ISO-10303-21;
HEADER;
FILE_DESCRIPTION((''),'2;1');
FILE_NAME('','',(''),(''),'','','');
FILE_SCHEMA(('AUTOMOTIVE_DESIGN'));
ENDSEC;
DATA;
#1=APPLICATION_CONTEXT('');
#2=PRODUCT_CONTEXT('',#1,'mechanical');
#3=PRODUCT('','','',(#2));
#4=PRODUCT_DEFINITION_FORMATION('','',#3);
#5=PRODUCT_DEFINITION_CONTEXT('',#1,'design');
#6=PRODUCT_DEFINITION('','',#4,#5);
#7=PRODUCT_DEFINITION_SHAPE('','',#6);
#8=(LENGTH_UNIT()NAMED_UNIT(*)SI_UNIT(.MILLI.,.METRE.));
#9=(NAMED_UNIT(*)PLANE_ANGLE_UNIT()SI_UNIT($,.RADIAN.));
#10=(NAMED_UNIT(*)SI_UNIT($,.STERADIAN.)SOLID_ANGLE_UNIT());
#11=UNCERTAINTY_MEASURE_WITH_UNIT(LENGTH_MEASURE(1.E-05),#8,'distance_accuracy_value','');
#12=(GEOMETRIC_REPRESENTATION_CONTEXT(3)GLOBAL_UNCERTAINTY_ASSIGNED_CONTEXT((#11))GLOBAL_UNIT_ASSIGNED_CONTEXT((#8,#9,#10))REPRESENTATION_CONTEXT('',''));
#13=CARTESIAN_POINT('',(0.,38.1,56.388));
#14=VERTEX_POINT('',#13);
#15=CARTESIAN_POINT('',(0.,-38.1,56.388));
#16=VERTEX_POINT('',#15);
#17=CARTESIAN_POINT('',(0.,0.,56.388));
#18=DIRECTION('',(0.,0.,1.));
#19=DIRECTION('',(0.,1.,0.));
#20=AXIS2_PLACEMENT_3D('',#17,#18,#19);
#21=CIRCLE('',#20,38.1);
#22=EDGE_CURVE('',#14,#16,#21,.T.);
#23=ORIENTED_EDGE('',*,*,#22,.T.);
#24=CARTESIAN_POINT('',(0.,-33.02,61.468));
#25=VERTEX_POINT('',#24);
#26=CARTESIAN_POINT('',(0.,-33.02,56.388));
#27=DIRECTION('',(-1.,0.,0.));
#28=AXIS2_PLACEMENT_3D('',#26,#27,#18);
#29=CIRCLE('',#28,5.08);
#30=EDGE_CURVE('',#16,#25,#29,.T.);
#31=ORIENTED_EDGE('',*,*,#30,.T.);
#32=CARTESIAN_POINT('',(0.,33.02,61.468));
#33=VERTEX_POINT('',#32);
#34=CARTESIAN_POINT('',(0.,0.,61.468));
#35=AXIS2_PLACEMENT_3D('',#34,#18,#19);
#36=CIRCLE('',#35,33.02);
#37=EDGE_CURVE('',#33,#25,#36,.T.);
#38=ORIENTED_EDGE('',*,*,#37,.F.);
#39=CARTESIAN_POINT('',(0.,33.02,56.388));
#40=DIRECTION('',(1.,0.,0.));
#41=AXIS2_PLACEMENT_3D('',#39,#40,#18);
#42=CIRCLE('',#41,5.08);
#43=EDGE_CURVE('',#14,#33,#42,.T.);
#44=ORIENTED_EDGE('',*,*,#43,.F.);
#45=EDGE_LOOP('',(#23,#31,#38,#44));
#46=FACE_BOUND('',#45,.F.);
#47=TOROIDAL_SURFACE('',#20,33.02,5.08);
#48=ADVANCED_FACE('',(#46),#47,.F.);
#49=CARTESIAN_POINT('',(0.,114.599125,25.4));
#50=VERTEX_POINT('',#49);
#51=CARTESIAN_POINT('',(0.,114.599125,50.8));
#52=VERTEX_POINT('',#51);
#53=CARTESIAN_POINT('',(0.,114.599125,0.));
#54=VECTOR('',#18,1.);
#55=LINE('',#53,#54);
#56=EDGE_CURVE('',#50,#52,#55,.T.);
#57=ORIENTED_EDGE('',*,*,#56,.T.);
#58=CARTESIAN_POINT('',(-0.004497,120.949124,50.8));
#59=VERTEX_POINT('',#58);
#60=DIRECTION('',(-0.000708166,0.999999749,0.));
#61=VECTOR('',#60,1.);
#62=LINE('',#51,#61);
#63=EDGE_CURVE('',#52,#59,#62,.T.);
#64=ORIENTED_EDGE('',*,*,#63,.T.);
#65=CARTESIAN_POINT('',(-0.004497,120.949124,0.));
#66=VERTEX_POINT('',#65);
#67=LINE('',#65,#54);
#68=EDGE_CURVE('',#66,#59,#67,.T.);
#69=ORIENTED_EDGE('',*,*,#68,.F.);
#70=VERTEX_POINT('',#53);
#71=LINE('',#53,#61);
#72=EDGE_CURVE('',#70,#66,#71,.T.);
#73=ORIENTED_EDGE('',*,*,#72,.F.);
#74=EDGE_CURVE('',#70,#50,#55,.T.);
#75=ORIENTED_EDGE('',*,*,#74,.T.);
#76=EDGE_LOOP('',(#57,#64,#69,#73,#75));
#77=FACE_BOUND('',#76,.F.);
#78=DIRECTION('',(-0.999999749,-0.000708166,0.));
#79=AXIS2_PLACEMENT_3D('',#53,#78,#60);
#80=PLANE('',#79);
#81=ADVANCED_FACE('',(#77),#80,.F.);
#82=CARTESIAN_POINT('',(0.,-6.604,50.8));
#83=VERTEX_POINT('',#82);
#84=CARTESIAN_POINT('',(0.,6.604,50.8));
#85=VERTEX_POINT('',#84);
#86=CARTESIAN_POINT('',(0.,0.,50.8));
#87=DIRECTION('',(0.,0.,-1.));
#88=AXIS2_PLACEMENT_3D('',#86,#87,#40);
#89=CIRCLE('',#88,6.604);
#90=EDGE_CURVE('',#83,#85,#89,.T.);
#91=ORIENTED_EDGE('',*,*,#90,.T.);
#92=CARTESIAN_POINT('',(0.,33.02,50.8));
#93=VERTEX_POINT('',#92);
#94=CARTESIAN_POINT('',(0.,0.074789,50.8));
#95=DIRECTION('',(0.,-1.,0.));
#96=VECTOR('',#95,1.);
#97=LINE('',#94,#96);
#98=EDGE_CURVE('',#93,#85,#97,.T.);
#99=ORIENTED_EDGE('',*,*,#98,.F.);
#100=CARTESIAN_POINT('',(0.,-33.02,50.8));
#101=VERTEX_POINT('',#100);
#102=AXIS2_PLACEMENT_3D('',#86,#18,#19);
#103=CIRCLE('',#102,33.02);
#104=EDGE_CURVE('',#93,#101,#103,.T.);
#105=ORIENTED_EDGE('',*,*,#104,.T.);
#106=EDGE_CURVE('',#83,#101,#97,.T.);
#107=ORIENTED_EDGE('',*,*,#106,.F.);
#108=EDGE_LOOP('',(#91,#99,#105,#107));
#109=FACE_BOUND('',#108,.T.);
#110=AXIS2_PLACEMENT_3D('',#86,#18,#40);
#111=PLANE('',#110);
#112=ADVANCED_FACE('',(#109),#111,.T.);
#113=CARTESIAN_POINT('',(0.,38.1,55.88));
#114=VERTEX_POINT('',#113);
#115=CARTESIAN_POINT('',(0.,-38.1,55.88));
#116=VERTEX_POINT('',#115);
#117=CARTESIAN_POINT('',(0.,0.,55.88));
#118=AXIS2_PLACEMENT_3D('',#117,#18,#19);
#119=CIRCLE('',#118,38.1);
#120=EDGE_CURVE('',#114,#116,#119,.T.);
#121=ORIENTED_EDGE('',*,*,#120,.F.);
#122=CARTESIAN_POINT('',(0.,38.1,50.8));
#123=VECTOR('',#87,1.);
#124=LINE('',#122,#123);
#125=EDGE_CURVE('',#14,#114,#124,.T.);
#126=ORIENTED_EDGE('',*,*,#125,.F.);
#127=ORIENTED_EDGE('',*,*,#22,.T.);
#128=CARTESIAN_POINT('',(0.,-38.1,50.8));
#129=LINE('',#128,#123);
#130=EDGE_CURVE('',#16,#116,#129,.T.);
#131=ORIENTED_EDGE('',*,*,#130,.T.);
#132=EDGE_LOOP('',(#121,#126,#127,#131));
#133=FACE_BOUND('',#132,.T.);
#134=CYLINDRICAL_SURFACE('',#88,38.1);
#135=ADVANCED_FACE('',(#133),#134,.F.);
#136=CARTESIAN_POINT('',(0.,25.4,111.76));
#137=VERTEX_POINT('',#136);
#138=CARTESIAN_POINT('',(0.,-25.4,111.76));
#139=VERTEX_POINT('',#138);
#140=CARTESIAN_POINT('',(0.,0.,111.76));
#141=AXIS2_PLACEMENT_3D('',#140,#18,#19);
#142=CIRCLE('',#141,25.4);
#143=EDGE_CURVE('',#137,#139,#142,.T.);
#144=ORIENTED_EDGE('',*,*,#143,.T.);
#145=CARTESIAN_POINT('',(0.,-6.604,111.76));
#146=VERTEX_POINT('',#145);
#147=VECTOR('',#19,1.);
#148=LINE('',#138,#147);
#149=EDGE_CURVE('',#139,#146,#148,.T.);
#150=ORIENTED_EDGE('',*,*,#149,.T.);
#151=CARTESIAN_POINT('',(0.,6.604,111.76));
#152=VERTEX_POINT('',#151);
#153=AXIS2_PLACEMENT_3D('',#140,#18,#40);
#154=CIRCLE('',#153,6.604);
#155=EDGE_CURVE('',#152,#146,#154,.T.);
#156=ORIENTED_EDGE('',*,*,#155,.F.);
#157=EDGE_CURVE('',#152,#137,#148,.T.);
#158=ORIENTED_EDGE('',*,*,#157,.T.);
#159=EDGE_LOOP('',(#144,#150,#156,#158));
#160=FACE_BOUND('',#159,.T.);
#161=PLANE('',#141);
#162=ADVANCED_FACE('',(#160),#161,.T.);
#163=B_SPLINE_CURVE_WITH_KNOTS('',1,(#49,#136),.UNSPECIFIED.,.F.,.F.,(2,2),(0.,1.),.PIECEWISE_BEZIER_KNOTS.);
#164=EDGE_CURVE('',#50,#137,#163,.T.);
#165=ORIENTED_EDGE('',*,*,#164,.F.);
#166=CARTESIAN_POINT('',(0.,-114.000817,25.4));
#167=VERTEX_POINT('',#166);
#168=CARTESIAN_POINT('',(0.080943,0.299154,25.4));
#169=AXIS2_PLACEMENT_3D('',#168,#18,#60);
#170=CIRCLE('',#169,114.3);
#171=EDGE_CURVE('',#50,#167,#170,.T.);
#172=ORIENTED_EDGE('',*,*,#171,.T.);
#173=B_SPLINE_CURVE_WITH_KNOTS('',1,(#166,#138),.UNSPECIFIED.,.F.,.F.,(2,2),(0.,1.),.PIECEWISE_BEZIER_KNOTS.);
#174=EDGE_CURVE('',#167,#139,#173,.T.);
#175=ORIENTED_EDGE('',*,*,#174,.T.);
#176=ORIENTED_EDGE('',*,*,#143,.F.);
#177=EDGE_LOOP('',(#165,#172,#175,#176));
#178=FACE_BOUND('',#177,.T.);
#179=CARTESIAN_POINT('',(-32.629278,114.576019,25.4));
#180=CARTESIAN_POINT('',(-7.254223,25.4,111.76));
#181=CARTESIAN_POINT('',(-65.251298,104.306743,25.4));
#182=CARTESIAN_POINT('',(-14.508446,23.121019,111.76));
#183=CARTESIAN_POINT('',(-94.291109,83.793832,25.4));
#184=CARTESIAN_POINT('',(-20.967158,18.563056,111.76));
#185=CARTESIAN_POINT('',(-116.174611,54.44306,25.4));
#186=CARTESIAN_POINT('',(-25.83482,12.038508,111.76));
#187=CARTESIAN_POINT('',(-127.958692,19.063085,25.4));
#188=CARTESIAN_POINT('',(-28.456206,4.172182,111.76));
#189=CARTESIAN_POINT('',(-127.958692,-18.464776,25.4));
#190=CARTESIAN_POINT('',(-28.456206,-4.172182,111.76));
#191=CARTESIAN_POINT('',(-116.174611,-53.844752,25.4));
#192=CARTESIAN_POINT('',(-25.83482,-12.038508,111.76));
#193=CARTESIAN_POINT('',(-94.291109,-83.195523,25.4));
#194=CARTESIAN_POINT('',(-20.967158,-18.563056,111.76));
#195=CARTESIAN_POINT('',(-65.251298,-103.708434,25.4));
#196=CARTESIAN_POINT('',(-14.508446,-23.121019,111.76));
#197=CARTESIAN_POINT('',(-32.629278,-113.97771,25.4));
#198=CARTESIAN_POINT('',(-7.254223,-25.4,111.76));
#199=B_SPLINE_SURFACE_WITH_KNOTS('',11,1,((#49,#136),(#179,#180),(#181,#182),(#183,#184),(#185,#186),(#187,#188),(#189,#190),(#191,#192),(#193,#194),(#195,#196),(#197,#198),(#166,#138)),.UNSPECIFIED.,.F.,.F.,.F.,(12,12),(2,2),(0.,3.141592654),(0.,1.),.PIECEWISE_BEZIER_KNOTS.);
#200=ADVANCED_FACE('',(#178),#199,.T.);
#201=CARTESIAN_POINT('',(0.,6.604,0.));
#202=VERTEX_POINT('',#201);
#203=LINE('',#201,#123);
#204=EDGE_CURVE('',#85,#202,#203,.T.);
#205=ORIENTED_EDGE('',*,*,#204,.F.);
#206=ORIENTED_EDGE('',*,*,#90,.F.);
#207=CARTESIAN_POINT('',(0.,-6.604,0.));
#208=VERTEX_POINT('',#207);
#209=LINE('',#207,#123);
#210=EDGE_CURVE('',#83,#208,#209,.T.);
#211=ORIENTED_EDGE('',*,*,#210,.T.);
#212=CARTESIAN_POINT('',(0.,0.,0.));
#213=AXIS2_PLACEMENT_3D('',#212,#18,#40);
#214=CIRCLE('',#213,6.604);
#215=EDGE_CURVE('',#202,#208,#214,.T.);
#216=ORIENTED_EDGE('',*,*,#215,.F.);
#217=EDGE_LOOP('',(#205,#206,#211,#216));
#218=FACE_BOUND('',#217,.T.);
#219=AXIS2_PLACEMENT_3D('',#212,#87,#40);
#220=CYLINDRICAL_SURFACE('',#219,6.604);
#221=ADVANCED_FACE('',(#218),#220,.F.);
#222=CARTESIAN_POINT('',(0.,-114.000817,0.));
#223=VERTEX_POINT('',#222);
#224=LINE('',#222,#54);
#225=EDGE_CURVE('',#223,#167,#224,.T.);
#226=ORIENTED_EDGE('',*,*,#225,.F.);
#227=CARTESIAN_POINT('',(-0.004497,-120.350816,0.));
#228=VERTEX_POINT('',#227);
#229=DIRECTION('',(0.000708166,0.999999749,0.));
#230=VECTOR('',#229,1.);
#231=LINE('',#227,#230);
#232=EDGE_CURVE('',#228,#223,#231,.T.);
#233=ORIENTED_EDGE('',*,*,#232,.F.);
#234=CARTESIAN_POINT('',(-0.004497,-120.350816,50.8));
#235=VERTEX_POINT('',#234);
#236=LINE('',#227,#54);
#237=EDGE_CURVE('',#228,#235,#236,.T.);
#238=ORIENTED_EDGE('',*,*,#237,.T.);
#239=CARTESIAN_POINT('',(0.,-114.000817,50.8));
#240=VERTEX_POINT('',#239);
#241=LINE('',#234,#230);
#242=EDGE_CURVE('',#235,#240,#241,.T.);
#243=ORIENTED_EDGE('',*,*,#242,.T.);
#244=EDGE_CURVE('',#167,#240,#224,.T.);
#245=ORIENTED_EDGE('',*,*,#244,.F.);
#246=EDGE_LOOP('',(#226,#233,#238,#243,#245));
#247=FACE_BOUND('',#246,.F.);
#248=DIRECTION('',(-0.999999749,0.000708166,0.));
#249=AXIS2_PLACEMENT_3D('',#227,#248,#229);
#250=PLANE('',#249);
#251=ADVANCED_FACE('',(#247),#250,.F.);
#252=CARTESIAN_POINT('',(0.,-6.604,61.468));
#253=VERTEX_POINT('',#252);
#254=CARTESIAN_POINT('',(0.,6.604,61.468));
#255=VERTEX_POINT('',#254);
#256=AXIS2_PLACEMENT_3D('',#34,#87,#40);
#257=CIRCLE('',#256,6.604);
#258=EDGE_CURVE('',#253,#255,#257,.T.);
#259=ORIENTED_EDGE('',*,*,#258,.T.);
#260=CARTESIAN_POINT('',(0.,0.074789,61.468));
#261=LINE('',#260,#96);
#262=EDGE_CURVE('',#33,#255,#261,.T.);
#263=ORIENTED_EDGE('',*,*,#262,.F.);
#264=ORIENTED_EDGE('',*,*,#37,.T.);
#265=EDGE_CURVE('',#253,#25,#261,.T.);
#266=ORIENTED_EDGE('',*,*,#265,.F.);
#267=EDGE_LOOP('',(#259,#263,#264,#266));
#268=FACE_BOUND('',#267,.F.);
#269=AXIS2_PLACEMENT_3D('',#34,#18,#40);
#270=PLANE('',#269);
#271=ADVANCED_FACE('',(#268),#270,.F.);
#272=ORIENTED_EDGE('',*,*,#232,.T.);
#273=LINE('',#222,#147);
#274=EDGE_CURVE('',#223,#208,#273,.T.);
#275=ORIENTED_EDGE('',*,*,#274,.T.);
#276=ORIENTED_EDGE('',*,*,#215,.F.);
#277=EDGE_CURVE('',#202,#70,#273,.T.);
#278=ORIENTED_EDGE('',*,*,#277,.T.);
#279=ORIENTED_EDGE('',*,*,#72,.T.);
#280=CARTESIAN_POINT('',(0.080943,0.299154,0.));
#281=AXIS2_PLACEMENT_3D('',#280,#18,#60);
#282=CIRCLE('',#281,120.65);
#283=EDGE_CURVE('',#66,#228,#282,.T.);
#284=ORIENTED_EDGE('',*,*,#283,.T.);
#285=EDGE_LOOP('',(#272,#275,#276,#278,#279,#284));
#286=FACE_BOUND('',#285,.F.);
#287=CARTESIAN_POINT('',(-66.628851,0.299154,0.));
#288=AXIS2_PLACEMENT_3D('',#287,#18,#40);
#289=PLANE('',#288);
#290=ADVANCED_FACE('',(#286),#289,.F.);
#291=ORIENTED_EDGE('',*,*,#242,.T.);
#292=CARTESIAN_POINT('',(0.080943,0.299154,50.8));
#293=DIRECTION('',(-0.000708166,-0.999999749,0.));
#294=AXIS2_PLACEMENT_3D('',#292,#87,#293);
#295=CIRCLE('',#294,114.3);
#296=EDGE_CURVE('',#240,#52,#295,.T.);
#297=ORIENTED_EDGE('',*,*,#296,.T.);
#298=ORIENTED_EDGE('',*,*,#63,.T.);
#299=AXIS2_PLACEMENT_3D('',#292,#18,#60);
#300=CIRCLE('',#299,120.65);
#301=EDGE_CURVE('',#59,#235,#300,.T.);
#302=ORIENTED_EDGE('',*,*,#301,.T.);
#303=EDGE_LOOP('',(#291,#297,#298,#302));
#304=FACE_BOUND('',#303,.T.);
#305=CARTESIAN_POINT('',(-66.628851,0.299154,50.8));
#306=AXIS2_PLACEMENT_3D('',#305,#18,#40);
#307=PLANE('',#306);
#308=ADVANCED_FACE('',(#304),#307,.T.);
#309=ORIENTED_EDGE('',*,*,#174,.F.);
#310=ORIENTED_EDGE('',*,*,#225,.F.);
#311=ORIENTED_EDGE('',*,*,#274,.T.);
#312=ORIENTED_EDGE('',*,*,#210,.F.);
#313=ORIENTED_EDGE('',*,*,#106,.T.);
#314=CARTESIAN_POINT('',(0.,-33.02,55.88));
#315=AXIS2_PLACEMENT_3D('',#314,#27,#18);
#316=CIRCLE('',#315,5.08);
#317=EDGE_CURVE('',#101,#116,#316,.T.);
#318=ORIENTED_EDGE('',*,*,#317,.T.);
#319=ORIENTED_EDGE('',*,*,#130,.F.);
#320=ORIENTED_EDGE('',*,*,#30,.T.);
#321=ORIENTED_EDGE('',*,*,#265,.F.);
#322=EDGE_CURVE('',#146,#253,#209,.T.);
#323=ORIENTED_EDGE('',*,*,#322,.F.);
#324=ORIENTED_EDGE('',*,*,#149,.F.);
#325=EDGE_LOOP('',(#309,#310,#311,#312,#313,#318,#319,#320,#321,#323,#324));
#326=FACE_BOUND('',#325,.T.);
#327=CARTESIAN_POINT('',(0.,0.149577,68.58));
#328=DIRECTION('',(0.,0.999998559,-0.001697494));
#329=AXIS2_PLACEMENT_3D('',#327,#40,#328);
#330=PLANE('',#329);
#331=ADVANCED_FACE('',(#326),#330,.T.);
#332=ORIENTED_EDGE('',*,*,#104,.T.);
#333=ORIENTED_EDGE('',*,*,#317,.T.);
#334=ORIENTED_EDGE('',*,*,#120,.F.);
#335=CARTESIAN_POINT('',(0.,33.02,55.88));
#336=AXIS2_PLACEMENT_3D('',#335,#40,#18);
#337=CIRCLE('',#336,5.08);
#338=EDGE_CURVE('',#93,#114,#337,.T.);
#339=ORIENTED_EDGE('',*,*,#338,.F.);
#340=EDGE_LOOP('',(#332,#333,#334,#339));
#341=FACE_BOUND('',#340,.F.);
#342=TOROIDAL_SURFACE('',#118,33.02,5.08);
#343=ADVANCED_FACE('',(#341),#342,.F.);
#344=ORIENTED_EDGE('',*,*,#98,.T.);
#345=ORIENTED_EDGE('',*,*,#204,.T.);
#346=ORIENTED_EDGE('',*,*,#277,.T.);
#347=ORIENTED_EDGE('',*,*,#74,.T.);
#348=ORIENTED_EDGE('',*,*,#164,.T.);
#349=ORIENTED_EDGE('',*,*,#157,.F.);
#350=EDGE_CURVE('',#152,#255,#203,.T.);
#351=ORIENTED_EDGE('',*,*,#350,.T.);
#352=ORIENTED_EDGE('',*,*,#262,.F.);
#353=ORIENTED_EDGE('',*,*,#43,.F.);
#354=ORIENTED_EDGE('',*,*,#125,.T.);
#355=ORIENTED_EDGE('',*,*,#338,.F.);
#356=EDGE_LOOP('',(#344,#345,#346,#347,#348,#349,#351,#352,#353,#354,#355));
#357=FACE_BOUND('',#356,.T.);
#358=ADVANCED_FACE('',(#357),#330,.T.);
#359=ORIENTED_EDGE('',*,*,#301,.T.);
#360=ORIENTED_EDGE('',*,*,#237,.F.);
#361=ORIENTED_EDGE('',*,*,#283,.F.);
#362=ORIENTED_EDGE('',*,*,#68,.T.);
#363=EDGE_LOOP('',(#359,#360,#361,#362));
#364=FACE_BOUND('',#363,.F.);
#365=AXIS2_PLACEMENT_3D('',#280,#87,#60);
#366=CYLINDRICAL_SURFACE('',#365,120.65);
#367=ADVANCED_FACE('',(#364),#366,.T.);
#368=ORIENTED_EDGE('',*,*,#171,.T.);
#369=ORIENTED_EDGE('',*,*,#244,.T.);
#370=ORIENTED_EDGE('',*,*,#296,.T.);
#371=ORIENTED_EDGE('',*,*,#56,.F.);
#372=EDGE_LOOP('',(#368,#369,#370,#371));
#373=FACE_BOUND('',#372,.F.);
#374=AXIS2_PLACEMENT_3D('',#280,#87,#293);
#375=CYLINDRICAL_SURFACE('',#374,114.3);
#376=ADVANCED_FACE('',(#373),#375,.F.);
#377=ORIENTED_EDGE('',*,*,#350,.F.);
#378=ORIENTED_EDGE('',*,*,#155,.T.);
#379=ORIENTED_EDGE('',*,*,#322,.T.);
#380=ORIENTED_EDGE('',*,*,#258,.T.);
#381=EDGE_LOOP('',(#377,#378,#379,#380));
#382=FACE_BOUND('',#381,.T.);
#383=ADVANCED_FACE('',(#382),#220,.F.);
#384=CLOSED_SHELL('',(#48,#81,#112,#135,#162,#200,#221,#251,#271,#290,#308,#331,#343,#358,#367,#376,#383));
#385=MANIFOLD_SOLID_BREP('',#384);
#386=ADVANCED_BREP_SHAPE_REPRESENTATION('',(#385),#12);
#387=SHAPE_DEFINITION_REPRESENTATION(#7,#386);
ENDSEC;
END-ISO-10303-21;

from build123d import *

# Parameters (mm, degrees)
F1_DEPTH  = 25.4
F2_DEPTH  = 50.8
F9_R      = 6.604
F10_DEPTH = 111.76
F11_R     = 38.1
F12_DEPTH = 10.668
F13_R     = 5.08


with BuildPart() as f1:
    # F0 (on Top) → F1 (new body)
    with BuildSketch(Plane.XY):
        with BuildLine():
            Line((0, -114.0008171796), (0, 114.599125499))
            ThreePointArc((0, 114.599125499), (-114.2190565937, 0.2991541597), (0, -114.0008171796))
        make_face()
    extrude(amount=F1_DEPTH)

    # F0 (on Top) → F2 (join)
    with BuildSketch(Plane.XY):
        with BuildLine():
            ThreePointArc((0, -114.0008171796), (-114.2190565937, 0.2991541597), (0, 114.599125499))
            Line((0, 114.599125499), (-0.0044968559, 120.9491239067))
            ThreePointArc((-0.0044968559, 120.9491239067), (-120.5690565937, 0.2991541597), (-0.0044968559, -120.3508155874))
            Line((-0.0044968559, -120.3508155874), (0, -114.0008171796))
        make_face()
    extrude(amount=F2_DEPTH)

    # F1_face (on face) → F5 section 0
    with BuildSketch(Plane(origin=(-48.4732263634, 0.2991541597, 25.4), x_dir=(1, 0, 0), z_dir=(0, 0, 1))):
        with BuildLine():
            Line((48.4732263634, -114.2999713393), (48.4732263634, 114.2999713393))
            ThreePointArc((48.4732263634, 114.2999713393), (-65.7458302303, 0), (48.4732263634, -114.2999713393))
        make_face()
    # F4 (on offset) → F5 section 1
    with BuildSketch(Plane.XY.offset(111.76)):
        with BuildLine():
            Line((0, 0), (0, 25.4))
            ThreePointArc((0, 25.4), (-25.4, 0), (0, -25.4))
            Line((0, -25.4), (0, 0))
        make_face()
    loft()

    # F9 (on Top) → F10 (cut)
    with BuildSketch(Plane.XY):
        Circle(F9_R)
    extrude(amount=F10_DEPTH, mode=Mode.SUBTRACT)

    # F11 (on offset) → F12 (cut)
    with BuildSketch(Plane.XY.offset(50.8)):
        Circle(F11_R)
    extrude(amount=F12_DEPTH, mode=Mode.SUBTRACT)

    # F13
    f13_edges = [f1.edges().sort_by_distance(p)[0] for p in [
        (-38.1, 0, 61.468),
        (-38.1, 0, 50.8),
    ]]
    fillet(f13_edges, radius=F13_R)


solid = f1.part
